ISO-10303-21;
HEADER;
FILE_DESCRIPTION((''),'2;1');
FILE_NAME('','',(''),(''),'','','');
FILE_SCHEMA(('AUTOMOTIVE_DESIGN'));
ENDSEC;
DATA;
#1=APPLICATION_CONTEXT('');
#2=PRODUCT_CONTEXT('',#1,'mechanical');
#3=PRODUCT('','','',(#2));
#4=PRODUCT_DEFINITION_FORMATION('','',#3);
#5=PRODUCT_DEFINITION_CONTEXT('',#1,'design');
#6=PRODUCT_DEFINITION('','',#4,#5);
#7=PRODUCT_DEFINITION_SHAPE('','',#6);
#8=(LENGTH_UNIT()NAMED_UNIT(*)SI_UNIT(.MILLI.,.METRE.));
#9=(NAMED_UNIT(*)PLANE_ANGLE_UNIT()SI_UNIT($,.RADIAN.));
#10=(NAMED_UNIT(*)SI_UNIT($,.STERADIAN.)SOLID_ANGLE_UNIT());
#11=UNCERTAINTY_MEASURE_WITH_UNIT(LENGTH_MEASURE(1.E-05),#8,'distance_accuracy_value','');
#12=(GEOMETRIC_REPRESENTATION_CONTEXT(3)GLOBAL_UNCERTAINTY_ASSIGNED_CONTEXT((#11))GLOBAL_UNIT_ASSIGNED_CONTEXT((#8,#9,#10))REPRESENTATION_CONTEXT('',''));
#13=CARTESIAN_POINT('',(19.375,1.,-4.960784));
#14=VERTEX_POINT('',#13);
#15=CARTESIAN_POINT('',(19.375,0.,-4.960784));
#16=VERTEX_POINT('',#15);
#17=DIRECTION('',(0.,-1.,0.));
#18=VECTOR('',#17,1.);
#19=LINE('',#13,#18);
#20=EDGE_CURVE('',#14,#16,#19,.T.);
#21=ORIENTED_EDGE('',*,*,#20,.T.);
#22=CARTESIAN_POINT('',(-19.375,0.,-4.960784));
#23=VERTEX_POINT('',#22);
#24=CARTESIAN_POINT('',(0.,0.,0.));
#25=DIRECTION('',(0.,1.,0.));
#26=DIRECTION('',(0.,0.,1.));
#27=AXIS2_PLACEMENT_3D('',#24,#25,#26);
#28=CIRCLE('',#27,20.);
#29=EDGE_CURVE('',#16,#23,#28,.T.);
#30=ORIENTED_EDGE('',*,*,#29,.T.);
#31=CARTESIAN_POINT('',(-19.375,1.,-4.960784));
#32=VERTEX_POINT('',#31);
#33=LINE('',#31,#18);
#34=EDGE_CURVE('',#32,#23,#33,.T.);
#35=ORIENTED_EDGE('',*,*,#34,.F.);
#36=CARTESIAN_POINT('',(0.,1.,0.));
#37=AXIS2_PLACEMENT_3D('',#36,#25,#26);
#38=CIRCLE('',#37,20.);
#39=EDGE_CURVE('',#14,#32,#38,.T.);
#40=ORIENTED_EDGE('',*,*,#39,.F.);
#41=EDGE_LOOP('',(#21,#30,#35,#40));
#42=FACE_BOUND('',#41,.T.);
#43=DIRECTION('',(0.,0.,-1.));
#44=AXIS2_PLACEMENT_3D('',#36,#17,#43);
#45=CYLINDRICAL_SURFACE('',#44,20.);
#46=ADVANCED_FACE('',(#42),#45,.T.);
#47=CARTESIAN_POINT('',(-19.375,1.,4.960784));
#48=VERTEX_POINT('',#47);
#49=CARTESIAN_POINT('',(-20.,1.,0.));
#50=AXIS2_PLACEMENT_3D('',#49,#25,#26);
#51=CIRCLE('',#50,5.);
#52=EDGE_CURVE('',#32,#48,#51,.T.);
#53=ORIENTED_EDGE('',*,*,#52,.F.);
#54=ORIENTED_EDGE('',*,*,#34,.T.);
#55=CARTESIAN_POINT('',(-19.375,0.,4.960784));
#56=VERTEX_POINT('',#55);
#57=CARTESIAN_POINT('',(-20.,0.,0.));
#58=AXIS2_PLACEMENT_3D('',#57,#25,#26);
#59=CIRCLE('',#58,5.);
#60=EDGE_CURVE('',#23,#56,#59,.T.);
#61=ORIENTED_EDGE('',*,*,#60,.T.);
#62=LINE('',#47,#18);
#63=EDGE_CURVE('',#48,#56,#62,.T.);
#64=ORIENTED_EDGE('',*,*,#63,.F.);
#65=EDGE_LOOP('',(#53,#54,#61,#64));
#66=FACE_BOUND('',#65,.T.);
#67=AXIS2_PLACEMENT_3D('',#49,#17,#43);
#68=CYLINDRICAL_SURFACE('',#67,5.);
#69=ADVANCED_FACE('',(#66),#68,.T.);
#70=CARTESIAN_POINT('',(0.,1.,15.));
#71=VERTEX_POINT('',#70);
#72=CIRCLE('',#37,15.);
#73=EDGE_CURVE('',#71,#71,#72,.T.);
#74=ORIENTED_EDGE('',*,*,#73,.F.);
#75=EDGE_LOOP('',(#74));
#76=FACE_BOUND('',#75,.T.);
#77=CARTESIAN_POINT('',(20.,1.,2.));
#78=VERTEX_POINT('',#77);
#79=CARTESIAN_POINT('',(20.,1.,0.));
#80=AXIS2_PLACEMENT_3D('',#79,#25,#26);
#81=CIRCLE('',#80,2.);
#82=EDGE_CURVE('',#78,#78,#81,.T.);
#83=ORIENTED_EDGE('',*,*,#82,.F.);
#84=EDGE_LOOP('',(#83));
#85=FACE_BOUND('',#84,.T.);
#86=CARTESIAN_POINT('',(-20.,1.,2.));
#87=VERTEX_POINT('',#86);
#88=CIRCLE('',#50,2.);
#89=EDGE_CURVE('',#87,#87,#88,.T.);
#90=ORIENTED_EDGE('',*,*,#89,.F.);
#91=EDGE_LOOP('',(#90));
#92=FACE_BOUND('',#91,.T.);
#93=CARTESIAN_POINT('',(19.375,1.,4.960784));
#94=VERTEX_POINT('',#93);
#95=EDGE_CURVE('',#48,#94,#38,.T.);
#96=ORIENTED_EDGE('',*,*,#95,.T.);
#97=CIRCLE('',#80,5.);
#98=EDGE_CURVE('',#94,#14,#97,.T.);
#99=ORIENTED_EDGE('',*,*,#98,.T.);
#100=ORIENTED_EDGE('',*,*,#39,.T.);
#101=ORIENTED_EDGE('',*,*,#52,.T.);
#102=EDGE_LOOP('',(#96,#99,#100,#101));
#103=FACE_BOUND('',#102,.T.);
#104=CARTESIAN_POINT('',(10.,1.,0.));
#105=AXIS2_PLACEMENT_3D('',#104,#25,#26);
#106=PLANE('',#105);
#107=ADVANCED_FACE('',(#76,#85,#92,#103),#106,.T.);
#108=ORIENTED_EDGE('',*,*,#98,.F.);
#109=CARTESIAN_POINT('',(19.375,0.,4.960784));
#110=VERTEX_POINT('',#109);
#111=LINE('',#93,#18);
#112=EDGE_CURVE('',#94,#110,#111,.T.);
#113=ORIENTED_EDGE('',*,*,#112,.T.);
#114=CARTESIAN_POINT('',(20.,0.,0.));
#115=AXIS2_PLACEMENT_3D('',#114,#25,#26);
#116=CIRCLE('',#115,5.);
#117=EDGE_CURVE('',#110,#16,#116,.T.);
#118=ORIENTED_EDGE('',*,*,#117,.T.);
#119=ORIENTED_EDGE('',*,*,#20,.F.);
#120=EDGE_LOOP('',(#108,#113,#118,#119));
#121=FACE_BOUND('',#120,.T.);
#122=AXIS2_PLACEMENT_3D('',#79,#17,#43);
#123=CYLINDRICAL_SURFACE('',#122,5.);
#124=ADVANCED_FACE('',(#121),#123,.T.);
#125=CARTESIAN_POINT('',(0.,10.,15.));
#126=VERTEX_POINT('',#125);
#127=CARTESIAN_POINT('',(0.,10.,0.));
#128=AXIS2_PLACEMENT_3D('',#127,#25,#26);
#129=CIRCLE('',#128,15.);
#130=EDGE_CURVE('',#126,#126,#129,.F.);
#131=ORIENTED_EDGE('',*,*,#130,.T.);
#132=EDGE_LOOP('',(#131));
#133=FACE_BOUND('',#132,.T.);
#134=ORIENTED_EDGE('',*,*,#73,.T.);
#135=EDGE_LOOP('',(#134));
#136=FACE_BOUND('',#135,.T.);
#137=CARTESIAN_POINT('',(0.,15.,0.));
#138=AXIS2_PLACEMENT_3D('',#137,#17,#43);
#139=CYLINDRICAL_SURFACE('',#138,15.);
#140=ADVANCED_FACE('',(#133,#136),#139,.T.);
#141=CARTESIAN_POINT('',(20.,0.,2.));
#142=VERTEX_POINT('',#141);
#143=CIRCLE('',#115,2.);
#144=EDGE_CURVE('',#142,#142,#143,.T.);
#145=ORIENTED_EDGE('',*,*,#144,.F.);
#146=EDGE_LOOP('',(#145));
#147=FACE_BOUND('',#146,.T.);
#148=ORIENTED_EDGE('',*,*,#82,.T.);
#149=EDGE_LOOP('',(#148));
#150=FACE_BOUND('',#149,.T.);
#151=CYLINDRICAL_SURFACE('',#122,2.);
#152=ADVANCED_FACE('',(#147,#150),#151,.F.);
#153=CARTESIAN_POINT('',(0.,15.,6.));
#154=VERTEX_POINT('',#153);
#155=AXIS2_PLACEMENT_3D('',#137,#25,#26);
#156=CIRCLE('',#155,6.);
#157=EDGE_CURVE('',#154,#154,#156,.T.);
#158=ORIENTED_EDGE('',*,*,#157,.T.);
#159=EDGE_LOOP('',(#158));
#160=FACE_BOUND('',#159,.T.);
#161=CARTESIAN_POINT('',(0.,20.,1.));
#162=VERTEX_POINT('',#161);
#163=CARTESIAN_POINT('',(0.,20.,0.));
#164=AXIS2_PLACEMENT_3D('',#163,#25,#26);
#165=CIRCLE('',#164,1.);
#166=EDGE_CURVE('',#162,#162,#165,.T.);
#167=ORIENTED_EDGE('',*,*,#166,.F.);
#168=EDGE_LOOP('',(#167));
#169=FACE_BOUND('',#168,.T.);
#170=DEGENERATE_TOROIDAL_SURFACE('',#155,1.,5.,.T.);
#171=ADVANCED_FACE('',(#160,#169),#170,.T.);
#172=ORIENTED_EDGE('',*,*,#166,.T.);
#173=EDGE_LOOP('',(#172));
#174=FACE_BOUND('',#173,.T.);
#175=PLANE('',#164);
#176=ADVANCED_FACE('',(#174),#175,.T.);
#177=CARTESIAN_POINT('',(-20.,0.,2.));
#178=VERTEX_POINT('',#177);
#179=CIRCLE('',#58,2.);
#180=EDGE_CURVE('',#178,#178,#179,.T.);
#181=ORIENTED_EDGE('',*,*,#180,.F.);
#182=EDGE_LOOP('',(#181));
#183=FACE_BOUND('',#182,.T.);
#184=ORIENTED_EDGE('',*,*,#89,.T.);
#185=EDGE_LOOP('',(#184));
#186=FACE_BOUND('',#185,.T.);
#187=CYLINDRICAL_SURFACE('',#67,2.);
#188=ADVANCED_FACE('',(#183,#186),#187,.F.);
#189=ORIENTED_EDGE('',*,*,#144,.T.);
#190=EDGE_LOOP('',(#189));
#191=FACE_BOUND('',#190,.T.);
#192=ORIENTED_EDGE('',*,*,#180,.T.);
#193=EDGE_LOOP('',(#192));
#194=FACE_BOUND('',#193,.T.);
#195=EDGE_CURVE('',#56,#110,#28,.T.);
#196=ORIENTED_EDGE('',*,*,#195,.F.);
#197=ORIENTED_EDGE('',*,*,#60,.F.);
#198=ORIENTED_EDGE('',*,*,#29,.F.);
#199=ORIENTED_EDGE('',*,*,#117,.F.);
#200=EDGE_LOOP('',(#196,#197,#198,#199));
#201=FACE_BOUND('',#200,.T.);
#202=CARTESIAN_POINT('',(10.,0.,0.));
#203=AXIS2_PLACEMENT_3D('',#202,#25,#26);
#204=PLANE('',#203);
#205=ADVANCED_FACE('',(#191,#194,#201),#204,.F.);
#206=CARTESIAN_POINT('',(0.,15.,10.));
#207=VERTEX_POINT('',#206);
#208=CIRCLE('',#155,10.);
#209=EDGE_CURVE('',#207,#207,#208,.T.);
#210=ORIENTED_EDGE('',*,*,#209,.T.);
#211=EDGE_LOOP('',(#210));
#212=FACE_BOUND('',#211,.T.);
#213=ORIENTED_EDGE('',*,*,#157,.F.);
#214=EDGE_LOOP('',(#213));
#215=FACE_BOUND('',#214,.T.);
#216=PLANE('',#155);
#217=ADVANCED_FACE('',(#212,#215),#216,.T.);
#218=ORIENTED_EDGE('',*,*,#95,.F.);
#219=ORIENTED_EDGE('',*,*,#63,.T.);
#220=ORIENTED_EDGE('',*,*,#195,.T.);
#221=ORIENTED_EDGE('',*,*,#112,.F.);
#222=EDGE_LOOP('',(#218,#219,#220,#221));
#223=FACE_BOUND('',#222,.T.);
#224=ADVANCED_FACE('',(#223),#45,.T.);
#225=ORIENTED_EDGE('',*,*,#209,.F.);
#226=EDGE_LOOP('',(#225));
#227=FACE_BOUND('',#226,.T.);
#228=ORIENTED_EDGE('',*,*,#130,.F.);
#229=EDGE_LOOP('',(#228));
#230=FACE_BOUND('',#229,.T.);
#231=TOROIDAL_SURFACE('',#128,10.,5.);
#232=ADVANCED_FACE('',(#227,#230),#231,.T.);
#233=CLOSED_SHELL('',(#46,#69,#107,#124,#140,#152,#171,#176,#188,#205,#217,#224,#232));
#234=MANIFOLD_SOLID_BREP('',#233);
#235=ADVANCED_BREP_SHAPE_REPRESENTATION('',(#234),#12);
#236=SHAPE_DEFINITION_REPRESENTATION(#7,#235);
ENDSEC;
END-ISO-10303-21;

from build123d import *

# Parameters (mm, degrees)
SKETCH1_R           = 2
BOSS_EXTRUDE1_DEPTH = 1
SKETCH2_R           = 15
BOSS_EXTRUDE2_DEPTH = 14
FILLET1_R           = 5
SKETCH3_R           = 6
BOSS_EXTRUDE3_DEPTH = 5
FILLET2_R           = 5


with BuildPart() as part:
    # Sketch1 → Boss-Extrude1 (new body)
    with BuildSketch(Plane(origin=(0, 0, 0), x_dir=(1, 0, 0), z_dir=(0, 1, 0))):
        with BuildLine():
            ThreePointArc((-19.375, -4.960783708), (0, -20), (19.375, -4.960783708))
            ThreePointArc((19.375, -4.960783708), (25, 0), (19.375, 4.960783708))
            ThreePointArc((19.375, 4.960783708), (0, 20), (-19.375, 4.960783708))
            ThreePointArc((-19.375, 4.960783708), (-25, 0), (-19.375, -4.960783708))
        make_face()
        with Locations(Location((-20, 0, 0), (0, 0, 270))):
            Circle(SKETCH1_R, mode=Mode.SUBTRACT)
        with Locations(Location((20, 0, 0), (0, 0, 270))):
            Circle(SKETCH1_R, mode=Mode.SUBTRACT)
    extrude(amount=BOSS_EXTRUDE1_DEPTH)

    # Sketch2 → Boss-Extrude2 (add)
    with BuildSketch(Plane(origin=(0, 1, 0), x_dir=(1, 0, 0), z_dir=(0, 1, 0))):
        with Locations(Location((0, 0, 0), (0, 0, 270))):
            Circle(SKETCH2_R)
    extrude(amount=BOSS_EXTRUDE2_DEPTH)

    # Fillet1
    fillet1_edges = [part.edges().sort_by_distance(p)[0] for p in [
        (0, 15, -15),
    ]]
    fillet(fillet1_edges, radius=FILLET1_R)

    # Sketch3 → Boss-Extrude3 (add)
    with BuildSketch(Plane(origin=(0, 15, 0), x_dir=(1, 0, 0), z_dir=(0, 1, 0))):
        with Locations(Location((0, 0, 0), (0, 0, 270))):
            Circle(SKETCH3_R)
    extrude(amount=BOSS_EXTRUDE3_DEPTH)

    # Fillet2
    fillet2_edges = [part.edges().sort_by_distance(p)[0] for p in [
        (0, 20, -6),
    ]]
    fillet(fillet2_edges, radius=FILLET2_R - 0.0001)  # a hair under: the kernel refuses the full size


solid = part.part
